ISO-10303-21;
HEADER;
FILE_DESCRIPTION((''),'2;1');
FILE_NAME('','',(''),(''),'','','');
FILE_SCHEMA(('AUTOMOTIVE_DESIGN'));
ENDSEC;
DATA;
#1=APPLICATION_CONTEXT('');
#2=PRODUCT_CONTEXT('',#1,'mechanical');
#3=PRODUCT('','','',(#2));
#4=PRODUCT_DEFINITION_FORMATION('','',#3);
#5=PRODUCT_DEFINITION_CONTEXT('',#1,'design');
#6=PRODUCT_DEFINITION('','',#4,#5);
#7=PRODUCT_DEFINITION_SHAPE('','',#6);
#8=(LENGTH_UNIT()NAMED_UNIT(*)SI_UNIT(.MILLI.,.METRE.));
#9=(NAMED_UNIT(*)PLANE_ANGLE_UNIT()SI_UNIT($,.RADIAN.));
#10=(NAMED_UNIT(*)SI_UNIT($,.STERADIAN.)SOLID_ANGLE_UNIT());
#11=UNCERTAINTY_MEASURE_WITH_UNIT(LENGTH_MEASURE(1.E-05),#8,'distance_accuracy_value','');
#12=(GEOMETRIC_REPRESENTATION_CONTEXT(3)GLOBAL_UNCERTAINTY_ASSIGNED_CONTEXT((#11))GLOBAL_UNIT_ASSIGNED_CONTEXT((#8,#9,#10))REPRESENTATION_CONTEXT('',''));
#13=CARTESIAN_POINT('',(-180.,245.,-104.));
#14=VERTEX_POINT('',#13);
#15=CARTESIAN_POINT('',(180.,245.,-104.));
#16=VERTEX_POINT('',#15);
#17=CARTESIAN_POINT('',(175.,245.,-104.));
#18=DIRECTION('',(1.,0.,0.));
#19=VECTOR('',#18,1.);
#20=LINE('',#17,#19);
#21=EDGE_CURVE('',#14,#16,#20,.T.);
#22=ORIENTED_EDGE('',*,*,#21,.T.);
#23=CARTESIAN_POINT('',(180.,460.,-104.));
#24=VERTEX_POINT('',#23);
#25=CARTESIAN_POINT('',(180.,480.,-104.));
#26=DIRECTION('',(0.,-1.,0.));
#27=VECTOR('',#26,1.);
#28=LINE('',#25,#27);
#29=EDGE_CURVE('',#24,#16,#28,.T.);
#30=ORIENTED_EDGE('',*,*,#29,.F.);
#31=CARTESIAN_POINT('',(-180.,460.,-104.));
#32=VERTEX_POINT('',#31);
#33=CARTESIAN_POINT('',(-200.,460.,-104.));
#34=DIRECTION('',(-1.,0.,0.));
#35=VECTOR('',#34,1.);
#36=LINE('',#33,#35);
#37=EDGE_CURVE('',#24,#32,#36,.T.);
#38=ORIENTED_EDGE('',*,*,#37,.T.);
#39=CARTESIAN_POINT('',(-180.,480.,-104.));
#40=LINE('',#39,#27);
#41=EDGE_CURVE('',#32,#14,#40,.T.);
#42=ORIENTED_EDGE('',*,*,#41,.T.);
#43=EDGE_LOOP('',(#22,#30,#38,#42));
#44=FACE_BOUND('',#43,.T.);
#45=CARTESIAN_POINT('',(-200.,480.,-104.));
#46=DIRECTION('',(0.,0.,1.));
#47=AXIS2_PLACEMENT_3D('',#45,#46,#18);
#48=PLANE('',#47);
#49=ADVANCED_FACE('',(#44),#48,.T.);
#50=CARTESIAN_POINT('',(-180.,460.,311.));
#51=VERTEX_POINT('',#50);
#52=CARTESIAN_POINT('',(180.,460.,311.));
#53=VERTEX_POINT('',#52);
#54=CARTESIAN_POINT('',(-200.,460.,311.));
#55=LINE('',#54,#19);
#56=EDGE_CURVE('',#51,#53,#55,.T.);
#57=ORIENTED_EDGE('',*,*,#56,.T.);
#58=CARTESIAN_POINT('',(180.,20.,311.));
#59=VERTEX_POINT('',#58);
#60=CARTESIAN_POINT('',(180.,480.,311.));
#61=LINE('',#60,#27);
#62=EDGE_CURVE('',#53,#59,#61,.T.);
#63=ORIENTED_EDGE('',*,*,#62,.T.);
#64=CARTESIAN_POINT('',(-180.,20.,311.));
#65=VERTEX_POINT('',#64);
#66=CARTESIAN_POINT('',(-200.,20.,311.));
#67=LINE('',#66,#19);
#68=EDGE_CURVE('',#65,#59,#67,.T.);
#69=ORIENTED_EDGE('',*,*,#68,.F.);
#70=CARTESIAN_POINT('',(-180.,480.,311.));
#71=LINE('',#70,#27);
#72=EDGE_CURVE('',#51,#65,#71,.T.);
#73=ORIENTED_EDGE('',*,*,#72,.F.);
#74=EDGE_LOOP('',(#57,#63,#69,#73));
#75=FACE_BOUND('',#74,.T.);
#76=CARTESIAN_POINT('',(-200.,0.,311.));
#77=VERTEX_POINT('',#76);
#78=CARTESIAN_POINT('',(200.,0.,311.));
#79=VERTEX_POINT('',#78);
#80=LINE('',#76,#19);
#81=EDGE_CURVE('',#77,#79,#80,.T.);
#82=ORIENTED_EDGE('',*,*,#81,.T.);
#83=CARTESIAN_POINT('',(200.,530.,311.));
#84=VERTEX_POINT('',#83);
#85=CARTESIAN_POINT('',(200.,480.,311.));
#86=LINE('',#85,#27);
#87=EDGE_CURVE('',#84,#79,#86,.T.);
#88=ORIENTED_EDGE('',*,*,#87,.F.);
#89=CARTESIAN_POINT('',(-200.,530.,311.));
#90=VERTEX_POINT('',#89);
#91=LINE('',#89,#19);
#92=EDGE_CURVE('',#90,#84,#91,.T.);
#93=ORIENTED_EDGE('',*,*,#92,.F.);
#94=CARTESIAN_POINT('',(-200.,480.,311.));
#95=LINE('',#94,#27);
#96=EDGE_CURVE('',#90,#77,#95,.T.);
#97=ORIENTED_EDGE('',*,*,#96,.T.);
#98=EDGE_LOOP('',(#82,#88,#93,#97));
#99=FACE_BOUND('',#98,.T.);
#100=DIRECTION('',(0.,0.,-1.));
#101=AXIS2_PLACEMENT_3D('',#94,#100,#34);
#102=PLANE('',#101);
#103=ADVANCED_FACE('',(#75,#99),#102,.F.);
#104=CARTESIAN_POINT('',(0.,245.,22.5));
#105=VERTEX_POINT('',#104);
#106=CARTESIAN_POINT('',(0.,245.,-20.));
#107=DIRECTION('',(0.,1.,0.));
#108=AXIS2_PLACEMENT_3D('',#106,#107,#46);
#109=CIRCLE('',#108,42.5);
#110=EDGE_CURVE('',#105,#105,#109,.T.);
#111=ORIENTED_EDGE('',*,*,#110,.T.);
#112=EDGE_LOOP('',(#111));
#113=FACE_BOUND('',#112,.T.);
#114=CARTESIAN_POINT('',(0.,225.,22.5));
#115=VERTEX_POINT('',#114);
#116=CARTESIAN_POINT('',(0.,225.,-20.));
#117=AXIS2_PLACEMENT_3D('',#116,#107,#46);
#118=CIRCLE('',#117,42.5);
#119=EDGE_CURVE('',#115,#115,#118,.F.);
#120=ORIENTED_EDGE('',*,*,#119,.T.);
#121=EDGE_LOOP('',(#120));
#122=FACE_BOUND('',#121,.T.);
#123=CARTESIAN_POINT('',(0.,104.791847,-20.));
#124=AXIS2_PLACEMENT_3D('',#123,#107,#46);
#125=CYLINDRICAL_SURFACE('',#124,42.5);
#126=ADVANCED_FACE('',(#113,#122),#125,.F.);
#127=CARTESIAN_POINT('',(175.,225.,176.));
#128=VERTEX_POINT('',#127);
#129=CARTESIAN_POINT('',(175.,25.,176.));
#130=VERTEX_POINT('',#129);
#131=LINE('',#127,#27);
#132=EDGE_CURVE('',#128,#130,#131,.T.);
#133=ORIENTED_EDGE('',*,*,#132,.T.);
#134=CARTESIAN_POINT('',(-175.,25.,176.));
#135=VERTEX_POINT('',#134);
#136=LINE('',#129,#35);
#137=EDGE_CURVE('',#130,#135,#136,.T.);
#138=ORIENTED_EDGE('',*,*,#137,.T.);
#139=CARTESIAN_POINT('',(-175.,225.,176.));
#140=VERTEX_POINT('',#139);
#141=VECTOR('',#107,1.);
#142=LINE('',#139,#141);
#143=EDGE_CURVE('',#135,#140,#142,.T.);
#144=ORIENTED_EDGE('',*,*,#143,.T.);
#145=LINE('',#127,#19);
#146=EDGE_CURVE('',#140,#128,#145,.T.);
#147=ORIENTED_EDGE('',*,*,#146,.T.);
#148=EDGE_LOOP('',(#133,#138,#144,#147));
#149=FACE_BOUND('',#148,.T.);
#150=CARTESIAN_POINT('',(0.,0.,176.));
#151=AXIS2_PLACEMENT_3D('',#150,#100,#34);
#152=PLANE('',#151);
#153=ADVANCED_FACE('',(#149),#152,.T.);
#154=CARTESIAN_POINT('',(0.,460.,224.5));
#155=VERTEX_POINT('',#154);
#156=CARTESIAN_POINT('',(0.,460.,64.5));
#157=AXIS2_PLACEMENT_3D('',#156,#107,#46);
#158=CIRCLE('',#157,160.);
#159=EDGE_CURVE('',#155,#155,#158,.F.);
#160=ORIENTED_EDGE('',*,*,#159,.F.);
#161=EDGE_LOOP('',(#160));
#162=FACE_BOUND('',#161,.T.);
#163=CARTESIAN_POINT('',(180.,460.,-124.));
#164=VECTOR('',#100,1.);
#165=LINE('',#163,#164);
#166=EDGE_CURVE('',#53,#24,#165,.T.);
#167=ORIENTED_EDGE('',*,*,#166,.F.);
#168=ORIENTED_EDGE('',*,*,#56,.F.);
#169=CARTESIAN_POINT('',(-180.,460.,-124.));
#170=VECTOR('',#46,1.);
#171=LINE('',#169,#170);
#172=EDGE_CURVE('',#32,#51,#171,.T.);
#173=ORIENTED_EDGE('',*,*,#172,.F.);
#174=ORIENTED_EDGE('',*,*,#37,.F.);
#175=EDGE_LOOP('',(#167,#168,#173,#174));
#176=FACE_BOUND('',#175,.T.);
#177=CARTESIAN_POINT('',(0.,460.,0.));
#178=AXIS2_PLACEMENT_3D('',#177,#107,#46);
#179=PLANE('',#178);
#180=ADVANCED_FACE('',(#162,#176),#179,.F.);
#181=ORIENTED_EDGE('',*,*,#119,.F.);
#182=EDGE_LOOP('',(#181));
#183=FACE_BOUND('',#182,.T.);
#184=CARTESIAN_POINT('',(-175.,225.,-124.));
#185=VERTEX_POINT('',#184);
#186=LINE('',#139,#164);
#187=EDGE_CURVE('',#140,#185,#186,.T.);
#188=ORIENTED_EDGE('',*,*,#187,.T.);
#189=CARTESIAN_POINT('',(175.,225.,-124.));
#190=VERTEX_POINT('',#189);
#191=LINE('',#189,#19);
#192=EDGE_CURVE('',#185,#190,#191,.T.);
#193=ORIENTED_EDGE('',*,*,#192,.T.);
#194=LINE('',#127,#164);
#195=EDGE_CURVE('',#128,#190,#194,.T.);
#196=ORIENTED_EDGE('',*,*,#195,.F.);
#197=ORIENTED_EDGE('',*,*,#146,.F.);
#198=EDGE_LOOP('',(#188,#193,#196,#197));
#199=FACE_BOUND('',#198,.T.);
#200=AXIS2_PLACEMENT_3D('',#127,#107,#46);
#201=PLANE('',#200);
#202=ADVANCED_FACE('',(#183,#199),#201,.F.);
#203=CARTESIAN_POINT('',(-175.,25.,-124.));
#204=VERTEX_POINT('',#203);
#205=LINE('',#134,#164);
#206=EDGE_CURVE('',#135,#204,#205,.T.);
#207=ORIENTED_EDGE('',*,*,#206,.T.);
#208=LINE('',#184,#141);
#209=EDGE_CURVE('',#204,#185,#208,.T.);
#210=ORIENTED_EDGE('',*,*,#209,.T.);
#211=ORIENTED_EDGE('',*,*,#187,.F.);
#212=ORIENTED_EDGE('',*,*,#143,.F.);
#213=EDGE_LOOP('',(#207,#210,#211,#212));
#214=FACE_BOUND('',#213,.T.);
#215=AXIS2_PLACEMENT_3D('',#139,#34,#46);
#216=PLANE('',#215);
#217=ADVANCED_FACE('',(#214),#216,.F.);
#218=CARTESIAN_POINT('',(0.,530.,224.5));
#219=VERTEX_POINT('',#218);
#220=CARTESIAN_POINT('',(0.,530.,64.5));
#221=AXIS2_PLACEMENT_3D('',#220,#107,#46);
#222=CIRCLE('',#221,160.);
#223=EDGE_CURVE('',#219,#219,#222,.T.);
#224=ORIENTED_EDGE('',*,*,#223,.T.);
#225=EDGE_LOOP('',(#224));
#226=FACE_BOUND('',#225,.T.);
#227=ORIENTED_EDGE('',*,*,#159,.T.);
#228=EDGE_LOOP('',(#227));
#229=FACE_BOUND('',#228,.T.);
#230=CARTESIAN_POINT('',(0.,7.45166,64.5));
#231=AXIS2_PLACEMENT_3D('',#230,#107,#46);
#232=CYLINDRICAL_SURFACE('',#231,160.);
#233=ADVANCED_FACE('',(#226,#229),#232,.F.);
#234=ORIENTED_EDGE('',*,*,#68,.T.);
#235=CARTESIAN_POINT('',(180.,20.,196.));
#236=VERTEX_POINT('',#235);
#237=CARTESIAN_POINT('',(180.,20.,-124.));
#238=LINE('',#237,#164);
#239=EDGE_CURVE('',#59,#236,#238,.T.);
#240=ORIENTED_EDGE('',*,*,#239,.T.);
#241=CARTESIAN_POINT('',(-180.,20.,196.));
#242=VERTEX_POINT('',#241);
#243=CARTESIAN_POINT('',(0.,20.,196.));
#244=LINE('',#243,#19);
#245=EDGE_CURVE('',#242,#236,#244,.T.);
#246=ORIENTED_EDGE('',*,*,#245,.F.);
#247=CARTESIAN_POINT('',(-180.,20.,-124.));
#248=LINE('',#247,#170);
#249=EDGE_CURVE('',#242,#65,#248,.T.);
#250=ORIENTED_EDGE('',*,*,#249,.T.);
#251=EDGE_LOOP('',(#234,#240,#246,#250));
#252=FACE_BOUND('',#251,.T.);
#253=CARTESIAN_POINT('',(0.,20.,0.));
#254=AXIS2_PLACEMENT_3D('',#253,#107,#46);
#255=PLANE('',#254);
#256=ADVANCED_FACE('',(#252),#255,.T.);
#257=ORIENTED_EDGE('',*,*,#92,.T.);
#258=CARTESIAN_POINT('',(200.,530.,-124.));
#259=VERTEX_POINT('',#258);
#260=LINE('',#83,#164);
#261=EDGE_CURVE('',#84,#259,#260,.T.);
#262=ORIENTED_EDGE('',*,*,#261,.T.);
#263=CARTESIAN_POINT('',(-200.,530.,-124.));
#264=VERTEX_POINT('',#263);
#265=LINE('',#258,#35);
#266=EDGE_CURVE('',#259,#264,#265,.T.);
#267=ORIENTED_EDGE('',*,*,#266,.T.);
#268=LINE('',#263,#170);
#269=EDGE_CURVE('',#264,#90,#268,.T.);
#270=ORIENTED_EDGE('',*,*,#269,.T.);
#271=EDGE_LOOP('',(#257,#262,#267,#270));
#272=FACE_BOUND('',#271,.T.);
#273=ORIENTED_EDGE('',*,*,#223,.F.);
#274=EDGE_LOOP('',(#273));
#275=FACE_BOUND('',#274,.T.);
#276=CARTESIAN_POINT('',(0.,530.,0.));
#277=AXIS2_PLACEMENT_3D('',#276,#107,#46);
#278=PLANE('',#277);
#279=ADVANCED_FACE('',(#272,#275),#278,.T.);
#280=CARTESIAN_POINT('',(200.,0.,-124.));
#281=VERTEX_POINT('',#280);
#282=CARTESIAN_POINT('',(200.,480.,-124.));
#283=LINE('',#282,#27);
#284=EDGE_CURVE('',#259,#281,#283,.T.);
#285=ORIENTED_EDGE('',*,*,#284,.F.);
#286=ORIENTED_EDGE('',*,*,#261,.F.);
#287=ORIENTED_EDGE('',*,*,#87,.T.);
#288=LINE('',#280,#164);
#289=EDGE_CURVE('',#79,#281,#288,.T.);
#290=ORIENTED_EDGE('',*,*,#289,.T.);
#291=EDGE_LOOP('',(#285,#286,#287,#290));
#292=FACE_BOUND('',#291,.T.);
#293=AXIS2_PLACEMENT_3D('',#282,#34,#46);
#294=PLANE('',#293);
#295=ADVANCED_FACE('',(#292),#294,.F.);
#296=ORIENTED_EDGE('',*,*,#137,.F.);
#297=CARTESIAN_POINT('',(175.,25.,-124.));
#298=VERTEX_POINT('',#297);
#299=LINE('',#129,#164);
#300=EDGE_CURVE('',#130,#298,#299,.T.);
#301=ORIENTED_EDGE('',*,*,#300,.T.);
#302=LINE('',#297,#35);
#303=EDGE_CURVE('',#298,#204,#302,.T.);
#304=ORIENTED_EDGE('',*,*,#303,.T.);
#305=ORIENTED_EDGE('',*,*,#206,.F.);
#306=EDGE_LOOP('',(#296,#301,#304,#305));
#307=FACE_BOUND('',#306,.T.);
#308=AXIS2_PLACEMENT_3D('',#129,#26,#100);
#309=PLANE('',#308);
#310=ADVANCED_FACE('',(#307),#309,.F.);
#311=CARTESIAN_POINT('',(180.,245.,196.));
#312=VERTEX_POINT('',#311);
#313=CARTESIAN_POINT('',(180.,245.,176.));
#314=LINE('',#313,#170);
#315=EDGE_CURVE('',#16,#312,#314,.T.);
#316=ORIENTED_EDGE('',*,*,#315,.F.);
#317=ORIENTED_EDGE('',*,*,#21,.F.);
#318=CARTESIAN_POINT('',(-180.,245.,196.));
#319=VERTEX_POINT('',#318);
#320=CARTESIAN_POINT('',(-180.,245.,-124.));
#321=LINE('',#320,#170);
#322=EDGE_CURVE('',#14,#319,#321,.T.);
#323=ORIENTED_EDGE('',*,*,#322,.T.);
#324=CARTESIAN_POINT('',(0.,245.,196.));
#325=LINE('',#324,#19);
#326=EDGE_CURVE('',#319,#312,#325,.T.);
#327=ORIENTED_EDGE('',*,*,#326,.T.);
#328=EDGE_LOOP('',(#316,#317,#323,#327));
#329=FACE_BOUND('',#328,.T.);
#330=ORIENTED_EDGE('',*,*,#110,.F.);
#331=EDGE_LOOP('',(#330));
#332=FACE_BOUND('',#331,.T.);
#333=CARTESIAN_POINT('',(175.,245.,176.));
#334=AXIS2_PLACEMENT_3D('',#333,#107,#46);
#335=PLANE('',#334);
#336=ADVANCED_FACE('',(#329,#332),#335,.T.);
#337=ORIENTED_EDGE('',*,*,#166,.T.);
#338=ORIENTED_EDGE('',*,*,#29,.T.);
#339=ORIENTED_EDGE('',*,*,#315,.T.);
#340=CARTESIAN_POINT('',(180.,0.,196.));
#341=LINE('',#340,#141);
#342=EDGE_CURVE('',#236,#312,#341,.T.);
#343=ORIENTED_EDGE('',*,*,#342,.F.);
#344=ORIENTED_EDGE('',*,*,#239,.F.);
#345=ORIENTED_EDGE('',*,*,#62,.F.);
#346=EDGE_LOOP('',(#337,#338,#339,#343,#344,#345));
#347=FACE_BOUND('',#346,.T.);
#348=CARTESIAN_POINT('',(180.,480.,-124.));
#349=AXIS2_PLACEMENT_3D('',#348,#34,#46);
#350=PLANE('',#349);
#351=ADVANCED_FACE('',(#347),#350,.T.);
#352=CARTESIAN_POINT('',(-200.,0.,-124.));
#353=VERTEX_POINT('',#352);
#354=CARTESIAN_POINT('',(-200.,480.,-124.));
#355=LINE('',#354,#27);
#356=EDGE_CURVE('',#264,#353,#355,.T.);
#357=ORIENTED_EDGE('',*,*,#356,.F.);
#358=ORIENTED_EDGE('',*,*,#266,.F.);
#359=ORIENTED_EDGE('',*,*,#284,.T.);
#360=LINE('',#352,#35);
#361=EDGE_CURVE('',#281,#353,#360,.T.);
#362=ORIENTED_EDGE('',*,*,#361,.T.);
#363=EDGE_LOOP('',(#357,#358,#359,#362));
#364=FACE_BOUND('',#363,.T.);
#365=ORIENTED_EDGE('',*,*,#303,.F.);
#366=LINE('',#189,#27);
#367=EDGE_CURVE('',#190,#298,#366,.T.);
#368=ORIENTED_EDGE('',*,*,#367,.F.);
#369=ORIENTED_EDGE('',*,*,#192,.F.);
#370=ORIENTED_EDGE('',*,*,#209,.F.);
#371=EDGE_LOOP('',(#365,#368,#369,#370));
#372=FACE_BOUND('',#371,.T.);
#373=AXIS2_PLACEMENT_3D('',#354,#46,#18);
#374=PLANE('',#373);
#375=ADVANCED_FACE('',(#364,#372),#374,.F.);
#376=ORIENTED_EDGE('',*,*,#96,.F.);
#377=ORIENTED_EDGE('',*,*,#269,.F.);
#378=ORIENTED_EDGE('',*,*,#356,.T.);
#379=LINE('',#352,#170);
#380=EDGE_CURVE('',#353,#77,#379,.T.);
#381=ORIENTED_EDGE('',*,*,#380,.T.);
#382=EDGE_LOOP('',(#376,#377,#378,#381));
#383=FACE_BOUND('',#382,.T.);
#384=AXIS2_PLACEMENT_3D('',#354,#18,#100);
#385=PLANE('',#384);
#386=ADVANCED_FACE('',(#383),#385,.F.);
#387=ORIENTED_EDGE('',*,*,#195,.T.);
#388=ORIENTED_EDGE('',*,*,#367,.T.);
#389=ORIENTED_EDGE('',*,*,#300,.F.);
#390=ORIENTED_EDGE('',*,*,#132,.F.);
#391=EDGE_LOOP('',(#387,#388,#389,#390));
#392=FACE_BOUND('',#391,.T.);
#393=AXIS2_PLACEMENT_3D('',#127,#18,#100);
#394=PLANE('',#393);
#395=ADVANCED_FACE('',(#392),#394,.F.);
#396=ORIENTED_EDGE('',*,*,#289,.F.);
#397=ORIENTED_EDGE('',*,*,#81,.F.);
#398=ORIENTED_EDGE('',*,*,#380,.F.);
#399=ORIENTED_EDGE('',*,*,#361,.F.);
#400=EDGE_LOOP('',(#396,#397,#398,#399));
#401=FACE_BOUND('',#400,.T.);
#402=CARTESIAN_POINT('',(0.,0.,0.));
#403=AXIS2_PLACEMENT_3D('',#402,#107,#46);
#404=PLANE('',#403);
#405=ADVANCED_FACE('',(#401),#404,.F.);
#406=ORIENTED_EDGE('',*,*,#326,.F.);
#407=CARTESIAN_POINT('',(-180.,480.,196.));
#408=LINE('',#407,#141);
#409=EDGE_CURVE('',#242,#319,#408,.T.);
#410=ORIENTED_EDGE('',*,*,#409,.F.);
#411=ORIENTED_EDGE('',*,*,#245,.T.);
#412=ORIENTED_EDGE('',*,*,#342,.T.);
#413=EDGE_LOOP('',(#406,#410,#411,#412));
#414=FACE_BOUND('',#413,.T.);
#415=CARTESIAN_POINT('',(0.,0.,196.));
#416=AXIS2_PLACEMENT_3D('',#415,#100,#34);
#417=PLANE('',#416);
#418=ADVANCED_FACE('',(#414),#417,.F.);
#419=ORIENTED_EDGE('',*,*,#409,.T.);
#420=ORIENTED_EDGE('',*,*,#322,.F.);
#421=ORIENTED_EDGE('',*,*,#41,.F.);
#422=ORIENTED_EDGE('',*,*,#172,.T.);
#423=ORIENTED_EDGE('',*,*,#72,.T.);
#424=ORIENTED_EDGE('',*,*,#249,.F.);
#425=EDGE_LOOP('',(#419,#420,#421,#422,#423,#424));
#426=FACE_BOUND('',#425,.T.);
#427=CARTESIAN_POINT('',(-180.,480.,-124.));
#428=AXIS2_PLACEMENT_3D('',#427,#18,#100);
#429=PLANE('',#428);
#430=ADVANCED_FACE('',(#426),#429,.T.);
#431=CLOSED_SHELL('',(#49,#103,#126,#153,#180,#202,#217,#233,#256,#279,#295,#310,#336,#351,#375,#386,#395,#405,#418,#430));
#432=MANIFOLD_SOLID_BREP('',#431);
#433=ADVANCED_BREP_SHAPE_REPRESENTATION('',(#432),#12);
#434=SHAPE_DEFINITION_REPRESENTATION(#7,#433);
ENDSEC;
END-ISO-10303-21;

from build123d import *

# Parameters (mm, degrees)
SKETCH1_W           = 400
SKETCH1_H           = 435
BOSS_EXTRUDE1_DEPTH = 480
SKETCH4_W           = 350
SKETCH4_H           = 200
CUT_EXTRUDE1_DEPTH  = 300
SHELL1_START        = -180
SHELL1_DEPTH        = 360
SKETCH5_W           = 400
SKETCH5_H           = 435
BOSS_EXTRUDE2_DEPTH = 50
SKETCH3_R           = 160
CUT_EXTRUDE2_DEPTH  = 70
SKETCH6_R           = 42.5
CUT_EXTRUDE3_DEPTH  = 20


# Read off the part's stored shape, not the designer's step: Shell1
with BuildPart() as part:
    # Sketch1 → Boss-Extrude1 (new body)
    with BuildSketch(Plane(origin=(0, 0, 0), x_dir=(1, 0, 0), z_dir=(0, 1, 0))):
        with Locations((0, -93.5)):
            Rectangle(SKETCH1_W, SKETCH1_H)
    extrude(amount=BOSS_EXTRUDE1_DEPTH)

    # Sketch4 → Cut-Extrude1 (cut)
    with BuildSketch(Plane(origin=(0, 0, -124), x_dir=(-1, 0, 0), z_dir=(0, 0, -1))):
        with Locations((0, 125)):
            Rectangle(SKETCH4_W, SKETCH4_H)
    extrude(amount=-CUT_EXTRUDE1_DEPTH, mode=Mode.SUBTRACT)

    # Shell1 outline → Shell1 (cut)
    with BuildSketch(Plane.YZ.offset(SHELL1_START)):
        Polygon((245, -104), (460, -104), (460, 311), (20, 311), (20, 196), (245, 196), align=None)
    extrude(amount=SHELL1_DEPTH, mode=Mode.SUBTRACT)

    # Sketch5 → Boss-Extrude2 (add)
    with BuildSketch(Plane(origin=(0, 480, 0), x_dir=(1, 0, 0), z_dir=(0, 1, 0))):
        with Locations((0, -93.5)):
            Rectangle(SKETCH5_W, SKETCH5_H)
    extrude(amount=BOSS_EXTRUDE2_DEPTH)

    # Sketch3 → Cut-Extrude2 (cut)
    with BuildSketch(Plane(origin=(0, 530, 0), x_dir=(1, 0, 0), z_dir=(0, 1, 0))):
        with Locations(Location((0, -64.5, 0), (0, 0, 270))):
            Circle(SKETCH3_R)
    extrude(amount=-CUT_EXTRUDE2_DEPTH, mode=Mode.SUBTRACT)

    # Sketch6 → Cut-Extrude3 (cut)
    with BuildSketch(Plane(origin=(0, 245, 0), x_dir=(1, 0, 0), z_dir=(0, 1, 0))):
        with Locations(Location((0, 20, 0), (0, 0, 270))):
            Circle(SKETCH6_R)
    extrude(amount=-CUT_EXTRUDE3_DEPTH, mode=Mode.SUBTRACT)


solid = part.part
